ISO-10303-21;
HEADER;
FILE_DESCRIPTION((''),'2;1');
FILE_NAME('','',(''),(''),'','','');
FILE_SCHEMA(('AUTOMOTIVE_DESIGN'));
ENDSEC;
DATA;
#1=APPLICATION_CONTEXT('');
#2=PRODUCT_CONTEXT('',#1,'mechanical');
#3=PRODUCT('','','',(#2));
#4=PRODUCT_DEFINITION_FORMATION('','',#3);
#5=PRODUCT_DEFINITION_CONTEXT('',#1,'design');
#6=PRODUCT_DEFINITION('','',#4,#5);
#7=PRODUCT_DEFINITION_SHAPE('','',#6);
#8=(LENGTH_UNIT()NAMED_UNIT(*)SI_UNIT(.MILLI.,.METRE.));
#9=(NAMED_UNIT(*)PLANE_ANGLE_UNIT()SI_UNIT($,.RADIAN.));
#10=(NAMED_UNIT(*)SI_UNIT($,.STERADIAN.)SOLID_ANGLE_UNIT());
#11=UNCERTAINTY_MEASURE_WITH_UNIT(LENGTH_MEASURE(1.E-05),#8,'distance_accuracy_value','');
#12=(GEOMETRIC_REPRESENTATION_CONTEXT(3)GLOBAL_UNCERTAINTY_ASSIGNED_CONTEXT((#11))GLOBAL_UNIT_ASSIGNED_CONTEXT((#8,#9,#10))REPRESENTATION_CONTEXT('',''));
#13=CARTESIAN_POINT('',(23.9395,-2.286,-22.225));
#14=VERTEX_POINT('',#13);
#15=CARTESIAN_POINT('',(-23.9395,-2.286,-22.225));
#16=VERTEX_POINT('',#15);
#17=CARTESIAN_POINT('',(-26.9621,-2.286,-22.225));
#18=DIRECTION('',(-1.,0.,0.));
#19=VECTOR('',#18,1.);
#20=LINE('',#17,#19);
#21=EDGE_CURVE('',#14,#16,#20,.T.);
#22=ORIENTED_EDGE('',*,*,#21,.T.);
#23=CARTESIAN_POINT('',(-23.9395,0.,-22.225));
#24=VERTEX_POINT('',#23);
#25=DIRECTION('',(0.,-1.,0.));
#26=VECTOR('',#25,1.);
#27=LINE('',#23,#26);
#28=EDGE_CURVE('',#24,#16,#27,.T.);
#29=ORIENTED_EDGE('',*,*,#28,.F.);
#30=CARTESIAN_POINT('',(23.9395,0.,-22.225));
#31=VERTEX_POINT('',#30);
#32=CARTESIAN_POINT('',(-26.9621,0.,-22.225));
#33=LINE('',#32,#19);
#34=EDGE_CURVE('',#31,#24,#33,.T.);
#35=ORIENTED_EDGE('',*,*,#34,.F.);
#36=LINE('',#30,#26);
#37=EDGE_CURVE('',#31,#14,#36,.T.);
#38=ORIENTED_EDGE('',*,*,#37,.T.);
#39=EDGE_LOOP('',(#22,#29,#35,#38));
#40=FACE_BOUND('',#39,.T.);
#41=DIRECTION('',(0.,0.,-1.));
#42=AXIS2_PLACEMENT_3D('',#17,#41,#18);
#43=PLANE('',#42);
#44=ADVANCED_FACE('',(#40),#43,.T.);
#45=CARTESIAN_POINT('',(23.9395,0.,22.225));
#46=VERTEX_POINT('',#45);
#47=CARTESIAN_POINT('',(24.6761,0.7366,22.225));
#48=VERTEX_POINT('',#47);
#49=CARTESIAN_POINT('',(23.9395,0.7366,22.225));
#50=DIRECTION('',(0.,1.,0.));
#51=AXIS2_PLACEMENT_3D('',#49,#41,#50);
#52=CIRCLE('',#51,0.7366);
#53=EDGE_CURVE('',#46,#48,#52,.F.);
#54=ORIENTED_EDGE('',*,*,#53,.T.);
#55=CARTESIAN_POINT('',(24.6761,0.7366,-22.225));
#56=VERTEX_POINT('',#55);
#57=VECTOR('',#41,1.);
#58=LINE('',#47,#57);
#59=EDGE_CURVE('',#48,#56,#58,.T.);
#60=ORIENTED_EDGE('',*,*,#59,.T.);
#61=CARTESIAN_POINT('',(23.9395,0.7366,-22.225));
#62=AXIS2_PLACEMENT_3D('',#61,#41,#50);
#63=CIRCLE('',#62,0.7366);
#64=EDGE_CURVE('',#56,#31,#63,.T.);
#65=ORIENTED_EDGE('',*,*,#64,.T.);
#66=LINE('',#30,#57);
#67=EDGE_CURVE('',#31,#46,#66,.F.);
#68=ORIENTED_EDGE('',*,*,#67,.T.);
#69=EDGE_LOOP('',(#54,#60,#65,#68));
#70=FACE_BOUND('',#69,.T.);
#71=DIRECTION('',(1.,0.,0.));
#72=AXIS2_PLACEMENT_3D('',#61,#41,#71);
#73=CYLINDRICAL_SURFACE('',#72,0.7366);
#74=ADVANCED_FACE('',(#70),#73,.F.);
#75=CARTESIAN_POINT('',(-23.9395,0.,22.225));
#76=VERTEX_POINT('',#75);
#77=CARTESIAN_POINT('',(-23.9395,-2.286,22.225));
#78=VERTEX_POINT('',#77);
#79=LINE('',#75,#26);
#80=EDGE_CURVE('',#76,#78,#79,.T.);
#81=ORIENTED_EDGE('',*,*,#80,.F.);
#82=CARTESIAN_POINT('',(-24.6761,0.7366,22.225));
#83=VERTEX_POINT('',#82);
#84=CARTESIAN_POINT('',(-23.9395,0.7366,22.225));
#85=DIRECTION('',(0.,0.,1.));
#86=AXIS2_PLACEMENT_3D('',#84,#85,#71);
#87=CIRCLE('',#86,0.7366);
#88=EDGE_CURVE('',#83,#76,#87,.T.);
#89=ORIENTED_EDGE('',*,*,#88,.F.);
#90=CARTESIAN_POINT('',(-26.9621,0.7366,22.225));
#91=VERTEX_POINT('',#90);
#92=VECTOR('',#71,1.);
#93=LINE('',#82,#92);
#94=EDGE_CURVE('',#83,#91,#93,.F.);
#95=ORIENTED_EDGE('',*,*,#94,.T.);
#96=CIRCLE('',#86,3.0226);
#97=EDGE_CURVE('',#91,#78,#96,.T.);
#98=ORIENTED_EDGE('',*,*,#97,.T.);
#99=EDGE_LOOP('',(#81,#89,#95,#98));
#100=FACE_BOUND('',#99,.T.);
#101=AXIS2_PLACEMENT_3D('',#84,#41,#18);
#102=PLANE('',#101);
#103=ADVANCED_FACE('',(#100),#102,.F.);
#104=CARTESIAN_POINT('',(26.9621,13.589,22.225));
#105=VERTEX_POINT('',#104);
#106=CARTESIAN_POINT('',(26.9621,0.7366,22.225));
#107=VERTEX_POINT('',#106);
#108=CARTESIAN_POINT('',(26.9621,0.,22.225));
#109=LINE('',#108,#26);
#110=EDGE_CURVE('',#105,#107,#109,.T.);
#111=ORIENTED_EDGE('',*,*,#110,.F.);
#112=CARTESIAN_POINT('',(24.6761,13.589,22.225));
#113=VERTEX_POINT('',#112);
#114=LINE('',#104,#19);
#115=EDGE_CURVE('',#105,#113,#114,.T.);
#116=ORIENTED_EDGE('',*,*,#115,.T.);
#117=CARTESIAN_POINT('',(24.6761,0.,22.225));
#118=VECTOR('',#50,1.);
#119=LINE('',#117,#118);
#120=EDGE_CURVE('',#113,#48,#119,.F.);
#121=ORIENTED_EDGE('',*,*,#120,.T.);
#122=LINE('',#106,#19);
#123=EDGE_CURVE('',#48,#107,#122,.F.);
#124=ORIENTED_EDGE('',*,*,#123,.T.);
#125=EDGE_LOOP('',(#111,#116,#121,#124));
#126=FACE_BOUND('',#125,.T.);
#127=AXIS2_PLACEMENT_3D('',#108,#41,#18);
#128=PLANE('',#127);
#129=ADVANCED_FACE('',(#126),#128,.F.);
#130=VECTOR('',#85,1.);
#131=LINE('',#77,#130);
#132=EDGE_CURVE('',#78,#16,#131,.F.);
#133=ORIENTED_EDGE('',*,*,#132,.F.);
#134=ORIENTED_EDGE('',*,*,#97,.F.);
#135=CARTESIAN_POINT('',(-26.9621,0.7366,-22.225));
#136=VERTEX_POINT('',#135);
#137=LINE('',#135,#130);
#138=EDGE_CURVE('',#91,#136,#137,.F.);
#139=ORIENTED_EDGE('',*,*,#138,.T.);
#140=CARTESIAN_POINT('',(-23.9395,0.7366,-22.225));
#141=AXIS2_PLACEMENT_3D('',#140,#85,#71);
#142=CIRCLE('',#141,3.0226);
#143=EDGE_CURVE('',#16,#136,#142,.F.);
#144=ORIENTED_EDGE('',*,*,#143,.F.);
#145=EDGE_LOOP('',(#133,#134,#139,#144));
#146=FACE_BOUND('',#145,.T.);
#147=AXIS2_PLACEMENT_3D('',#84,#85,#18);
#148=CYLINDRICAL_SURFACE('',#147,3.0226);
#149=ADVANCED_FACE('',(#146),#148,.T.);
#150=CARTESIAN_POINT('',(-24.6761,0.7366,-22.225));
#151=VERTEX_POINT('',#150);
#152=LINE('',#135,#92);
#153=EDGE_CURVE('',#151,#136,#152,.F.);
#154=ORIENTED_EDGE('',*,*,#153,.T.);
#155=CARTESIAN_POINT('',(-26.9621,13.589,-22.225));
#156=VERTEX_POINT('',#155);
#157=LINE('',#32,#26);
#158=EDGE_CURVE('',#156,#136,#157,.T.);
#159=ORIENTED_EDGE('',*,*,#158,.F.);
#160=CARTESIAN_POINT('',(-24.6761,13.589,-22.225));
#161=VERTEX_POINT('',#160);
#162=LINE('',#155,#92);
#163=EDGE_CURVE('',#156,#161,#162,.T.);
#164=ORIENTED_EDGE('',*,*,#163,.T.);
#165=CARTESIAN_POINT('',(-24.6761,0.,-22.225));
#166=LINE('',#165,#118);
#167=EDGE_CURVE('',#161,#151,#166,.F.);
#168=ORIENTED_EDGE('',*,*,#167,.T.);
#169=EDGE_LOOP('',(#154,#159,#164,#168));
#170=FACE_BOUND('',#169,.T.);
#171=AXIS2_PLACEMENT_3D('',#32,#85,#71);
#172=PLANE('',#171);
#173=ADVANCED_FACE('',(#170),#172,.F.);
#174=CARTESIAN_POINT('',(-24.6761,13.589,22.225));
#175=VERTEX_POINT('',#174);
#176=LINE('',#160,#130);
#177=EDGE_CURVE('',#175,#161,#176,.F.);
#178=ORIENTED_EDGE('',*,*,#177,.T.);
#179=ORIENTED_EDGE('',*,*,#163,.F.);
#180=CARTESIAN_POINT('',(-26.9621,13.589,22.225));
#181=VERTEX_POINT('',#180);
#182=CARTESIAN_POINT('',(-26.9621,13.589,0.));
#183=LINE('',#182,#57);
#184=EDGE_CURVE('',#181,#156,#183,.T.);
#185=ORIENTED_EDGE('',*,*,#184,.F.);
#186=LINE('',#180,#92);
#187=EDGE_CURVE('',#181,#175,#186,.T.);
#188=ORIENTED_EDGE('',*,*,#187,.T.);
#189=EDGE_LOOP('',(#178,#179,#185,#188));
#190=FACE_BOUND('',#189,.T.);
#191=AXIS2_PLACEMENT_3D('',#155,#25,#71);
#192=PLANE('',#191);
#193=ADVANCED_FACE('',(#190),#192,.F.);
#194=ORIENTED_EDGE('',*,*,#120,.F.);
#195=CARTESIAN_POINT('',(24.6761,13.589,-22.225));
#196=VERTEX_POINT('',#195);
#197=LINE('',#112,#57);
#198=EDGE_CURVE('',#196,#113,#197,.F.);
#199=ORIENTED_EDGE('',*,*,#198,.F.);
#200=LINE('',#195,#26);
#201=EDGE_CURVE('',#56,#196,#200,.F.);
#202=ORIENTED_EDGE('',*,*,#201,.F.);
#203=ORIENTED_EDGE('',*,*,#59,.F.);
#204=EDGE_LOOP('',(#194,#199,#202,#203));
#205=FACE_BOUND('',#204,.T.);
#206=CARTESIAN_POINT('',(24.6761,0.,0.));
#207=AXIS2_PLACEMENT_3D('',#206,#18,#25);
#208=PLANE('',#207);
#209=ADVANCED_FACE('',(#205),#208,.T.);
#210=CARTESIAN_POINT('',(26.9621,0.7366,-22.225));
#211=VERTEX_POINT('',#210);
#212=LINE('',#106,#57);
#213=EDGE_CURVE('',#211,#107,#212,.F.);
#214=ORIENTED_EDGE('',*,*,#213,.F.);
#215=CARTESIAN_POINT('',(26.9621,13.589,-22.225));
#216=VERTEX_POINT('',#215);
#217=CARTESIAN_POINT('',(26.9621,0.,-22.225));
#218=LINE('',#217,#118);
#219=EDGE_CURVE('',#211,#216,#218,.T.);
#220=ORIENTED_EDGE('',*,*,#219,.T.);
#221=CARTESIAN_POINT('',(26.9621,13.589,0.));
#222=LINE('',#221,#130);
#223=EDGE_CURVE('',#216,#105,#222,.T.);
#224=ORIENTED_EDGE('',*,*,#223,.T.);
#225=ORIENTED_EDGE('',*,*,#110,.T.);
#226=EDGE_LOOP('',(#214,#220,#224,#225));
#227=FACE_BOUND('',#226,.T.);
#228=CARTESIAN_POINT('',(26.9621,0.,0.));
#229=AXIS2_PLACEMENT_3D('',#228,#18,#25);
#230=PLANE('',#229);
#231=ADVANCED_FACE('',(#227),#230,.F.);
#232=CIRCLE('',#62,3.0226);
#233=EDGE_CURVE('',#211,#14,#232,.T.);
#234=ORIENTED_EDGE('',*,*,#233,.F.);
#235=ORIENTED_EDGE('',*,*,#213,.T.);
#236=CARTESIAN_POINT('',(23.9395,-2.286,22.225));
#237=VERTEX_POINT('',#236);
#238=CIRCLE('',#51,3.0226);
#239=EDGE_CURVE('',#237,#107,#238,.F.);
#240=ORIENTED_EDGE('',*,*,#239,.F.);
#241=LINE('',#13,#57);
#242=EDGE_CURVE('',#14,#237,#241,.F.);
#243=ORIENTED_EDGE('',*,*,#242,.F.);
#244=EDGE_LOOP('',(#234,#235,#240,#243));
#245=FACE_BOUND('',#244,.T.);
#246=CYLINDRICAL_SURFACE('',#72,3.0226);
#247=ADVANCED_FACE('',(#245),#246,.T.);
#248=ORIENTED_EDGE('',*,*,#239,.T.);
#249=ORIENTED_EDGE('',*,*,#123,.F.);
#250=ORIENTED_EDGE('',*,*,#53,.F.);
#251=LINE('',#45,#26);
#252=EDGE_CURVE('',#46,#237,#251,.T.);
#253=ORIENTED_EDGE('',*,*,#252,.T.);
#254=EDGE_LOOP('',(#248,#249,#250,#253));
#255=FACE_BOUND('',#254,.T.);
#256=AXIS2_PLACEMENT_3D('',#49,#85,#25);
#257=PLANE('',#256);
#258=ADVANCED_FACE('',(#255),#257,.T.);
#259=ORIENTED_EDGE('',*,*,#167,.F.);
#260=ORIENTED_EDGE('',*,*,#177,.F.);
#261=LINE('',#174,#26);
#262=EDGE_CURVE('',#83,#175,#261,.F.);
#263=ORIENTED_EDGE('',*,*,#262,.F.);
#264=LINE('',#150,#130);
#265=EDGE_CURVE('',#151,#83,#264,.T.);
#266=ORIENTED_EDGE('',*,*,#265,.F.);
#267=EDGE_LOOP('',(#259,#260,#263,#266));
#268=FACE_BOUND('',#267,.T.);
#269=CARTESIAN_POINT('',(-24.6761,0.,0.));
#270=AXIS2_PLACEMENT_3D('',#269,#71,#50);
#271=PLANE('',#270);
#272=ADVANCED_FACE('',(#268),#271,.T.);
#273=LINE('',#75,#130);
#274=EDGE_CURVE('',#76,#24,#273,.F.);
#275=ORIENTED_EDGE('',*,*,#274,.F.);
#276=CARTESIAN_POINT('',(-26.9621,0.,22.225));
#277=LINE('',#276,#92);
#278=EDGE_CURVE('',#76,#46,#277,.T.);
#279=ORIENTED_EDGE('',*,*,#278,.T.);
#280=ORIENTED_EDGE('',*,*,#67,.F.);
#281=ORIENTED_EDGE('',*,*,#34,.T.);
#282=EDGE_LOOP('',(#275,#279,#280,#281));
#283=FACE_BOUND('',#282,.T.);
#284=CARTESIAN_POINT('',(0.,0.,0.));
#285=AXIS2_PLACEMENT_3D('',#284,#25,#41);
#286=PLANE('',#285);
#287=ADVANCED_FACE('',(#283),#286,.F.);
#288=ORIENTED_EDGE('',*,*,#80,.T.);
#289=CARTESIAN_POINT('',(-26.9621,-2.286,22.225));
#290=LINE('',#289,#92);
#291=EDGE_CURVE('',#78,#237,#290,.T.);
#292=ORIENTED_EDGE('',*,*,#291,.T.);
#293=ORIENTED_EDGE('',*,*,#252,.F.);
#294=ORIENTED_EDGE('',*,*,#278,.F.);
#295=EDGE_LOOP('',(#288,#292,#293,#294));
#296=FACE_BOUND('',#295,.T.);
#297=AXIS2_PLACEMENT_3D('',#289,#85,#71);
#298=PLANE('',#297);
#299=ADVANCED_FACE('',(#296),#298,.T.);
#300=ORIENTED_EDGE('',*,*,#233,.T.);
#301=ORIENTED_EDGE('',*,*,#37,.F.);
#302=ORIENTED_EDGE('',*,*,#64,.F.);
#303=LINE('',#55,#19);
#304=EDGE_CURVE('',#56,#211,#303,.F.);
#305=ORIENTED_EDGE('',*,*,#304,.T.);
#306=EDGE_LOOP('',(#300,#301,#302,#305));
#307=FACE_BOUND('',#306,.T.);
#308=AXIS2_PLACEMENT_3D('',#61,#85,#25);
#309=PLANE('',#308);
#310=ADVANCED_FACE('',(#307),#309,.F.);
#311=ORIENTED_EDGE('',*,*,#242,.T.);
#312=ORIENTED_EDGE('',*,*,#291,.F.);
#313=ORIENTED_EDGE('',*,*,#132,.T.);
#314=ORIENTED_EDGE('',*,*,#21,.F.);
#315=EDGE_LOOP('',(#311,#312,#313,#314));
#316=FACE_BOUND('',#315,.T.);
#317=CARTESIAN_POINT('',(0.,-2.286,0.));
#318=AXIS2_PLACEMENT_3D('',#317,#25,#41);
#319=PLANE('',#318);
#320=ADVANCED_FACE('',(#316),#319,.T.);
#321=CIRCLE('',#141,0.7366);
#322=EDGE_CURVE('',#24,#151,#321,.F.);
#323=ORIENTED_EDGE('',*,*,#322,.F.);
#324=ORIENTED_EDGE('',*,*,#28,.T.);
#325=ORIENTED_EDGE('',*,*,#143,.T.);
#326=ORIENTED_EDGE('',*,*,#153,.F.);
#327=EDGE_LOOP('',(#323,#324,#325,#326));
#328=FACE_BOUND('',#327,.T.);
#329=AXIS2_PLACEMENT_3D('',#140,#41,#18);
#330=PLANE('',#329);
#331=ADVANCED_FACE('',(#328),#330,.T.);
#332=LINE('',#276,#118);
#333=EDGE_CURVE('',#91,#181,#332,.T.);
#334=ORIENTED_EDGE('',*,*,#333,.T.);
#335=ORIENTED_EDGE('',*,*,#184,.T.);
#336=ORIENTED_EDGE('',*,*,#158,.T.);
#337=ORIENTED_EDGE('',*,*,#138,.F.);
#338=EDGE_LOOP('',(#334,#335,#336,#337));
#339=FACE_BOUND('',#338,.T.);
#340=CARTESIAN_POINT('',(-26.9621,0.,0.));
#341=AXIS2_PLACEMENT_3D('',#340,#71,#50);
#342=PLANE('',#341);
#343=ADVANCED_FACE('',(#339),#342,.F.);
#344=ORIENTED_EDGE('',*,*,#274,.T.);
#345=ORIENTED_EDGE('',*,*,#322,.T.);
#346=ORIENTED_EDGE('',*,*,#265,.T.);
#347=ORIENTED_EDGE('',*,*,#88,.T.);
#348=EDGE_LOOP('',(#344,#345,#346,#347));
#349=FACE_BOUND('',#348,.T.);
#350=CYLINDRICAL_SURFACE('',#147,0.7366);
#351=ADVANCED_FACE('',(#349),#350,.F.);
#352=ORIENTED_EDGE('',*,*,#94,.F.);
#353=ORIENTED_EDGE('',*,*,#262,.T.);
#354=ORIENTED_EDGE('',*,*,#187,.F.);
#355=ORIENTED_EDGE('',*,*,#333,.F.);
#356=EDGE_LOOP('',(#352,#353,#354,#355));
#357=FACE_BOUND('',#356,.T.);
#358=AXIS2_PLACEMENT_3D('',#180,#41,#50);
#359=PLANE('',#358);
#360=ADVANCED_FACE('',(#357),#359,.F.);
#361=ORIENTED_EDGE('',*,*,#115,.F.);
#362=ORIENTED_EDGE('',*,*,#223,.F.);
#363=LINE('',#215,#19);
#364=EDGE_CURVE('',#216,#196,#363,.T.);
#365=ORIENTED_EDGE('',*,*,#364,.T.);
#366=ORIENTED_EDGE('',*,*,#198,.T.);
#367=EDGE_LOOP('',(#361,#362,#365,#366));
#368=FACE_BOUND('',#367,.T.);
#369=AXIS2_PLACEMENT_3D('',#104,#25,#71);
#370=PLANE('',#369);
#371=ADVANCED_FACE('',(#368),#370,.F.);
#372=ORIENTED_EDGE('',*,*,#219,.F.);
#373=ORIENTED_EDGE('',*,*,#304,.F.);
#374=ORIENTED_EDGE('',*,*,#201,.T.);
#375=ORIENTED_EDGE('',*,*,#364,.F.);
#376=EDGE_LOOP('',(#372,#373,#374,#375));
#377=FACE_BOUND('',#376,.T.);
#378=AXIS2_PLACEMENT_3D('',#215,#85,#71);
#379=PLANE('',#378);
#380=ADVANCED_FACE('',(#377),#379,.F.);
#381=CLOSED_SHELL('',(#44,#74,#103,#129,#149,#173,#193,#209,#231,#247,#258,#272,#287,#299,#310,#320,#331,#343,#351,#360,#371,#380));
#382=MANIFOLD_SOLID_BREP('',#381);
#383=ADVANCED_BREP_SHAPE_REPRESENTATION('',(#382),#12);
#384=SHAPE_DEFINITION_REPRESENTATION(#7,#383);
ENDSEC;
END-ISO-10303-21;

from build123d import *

# Parameters (mm, degrees)
SKETCH1_W                      = 53.9242
SKETCH1_H                      = 44.45
BASE_FLANGE2_DEPTH             = 2.286
EDGE_FLANGE1_STRIP_W           = 10.6172
EDGE_FLANGE1_STRIP_H           = 2.286
EDGE_FLANGE1_STRIP_CUT_DEPTH   = 44.45
EDGE_FLANGE1_STRIP_2_W         = 10.6172
EDGE_FLANGE1_STRIP_2_H         = 2.286
EDGE_FLANGE1_STRIP_CUT_2_DEPTH = 44.45
EDGE_FLANGE1_DEPTH             = 44.45
EDGE_FLANGE1_BEND_DEPTH        = 44.45


# Sheet-metal steps are written as plain solids
with BuildPart() as part:
    # Sketch1 → Base-Flange2 (new body)
    with BuildSketch(Plane(origin=(0, 0, 0), x_dir=(1, 0, 0), z_dir=(0, 1, 0))):
        Rectangle(SKETCH1_W, SKETCH1_H)
    extrude(amount=-BASE_FLANGE2_DEPTH)

    # Edge-Flange1 strip (across the edge) → Edge-Flange1 strip cut (cut)
    with BuildSketch(Plane(origin=(-26.9621, 0, -22.225), x_dir=(1, 0, 0), z_dir=(0, 0, 1))):
        with Locations((-2.286, -1.143)):
            Rectangle(EDGE_FLANGE1_STRIP_W, EDGE_FLANGE1_STRIP_H)
    extrude(amount=EDGE_FLANGE1_STRIP_CUT_DEPTH, mode=Mode.SUBTRACT)

    # Edge-Flange1 strip 2 (across the edge) → Edge-Flange1 strip cut 2 (cut)
    with BuildSketch(Plane(origin=(26.9621, 0, 22.225), x_dir=(-1, 0, 0), z_dir=(0, 0, -1))):
        with Locations((-2.286, -1.143)):
            Rectangle(EDGE_FLANGE1_STRIP_2_W, EDGE_FLANGE1_STRIP_2_H)
    extrude(amount=EDGE_FLANGE1_STRIP_CUT_2_DEPTH, mode=Mode.SUBTRACT)

    # Edge-Flange1 section (across the edge) → Edge-Flange1 (add)
    with BuildSketch(Plane(origin=(-26.9621, 0, -22.225), x_dir=(1, 0, 0), z_dir=(0, 0, 1))):
        with BuildLine():
            Line((0, 0.7366), (0, 13.589))
            Line((0, 13.589), (2.286, 13.589))
            Line((2.286, 13.589), (2.286, 0.7366))
            ThreePointArc((2.286, 0.7366), (2.501745145, 0.215745145), (3.0226, 0))
            Line((3.0226, 0), (3.0226, -2.286))
            ThreePointArc((3.0226, -2.286), (0.885299043, -1.400700957), (0, 0.7366))
        make_face()
    extrude(amount=EDGE_FLANGE1_DEPTH)

    # Edge-Flange1 section 2 (across the edge) → Edge-Flange1 bend (add)
    with BuildSketch(Plane(origin=(26.9621, 0, 22.225), x_dir=(-1, 0, 0), z_dir=(0, 0, -1))):
        with BuildLine():
            Line((0, 0.7366), (0, 13.589))
            Line((0, 13.589), (2.286, 13.589))
            Line((2.286, 13.589), (2.286, 0.7366))
            ThreePointArc((2.286, 0.7366), (2.501745145, 0.215745145), (3.0226, 0))
            Line((3.0226, 0), (3.0226, -2.286))
            ThreePointArc((3.0226, -2.286), (0.885299043, -1.400700957), (0, 0.7366))
        make_face()
    extrude(amount=EDGE_FLANGE1_BEND_DEPTH)


solid = part.part
